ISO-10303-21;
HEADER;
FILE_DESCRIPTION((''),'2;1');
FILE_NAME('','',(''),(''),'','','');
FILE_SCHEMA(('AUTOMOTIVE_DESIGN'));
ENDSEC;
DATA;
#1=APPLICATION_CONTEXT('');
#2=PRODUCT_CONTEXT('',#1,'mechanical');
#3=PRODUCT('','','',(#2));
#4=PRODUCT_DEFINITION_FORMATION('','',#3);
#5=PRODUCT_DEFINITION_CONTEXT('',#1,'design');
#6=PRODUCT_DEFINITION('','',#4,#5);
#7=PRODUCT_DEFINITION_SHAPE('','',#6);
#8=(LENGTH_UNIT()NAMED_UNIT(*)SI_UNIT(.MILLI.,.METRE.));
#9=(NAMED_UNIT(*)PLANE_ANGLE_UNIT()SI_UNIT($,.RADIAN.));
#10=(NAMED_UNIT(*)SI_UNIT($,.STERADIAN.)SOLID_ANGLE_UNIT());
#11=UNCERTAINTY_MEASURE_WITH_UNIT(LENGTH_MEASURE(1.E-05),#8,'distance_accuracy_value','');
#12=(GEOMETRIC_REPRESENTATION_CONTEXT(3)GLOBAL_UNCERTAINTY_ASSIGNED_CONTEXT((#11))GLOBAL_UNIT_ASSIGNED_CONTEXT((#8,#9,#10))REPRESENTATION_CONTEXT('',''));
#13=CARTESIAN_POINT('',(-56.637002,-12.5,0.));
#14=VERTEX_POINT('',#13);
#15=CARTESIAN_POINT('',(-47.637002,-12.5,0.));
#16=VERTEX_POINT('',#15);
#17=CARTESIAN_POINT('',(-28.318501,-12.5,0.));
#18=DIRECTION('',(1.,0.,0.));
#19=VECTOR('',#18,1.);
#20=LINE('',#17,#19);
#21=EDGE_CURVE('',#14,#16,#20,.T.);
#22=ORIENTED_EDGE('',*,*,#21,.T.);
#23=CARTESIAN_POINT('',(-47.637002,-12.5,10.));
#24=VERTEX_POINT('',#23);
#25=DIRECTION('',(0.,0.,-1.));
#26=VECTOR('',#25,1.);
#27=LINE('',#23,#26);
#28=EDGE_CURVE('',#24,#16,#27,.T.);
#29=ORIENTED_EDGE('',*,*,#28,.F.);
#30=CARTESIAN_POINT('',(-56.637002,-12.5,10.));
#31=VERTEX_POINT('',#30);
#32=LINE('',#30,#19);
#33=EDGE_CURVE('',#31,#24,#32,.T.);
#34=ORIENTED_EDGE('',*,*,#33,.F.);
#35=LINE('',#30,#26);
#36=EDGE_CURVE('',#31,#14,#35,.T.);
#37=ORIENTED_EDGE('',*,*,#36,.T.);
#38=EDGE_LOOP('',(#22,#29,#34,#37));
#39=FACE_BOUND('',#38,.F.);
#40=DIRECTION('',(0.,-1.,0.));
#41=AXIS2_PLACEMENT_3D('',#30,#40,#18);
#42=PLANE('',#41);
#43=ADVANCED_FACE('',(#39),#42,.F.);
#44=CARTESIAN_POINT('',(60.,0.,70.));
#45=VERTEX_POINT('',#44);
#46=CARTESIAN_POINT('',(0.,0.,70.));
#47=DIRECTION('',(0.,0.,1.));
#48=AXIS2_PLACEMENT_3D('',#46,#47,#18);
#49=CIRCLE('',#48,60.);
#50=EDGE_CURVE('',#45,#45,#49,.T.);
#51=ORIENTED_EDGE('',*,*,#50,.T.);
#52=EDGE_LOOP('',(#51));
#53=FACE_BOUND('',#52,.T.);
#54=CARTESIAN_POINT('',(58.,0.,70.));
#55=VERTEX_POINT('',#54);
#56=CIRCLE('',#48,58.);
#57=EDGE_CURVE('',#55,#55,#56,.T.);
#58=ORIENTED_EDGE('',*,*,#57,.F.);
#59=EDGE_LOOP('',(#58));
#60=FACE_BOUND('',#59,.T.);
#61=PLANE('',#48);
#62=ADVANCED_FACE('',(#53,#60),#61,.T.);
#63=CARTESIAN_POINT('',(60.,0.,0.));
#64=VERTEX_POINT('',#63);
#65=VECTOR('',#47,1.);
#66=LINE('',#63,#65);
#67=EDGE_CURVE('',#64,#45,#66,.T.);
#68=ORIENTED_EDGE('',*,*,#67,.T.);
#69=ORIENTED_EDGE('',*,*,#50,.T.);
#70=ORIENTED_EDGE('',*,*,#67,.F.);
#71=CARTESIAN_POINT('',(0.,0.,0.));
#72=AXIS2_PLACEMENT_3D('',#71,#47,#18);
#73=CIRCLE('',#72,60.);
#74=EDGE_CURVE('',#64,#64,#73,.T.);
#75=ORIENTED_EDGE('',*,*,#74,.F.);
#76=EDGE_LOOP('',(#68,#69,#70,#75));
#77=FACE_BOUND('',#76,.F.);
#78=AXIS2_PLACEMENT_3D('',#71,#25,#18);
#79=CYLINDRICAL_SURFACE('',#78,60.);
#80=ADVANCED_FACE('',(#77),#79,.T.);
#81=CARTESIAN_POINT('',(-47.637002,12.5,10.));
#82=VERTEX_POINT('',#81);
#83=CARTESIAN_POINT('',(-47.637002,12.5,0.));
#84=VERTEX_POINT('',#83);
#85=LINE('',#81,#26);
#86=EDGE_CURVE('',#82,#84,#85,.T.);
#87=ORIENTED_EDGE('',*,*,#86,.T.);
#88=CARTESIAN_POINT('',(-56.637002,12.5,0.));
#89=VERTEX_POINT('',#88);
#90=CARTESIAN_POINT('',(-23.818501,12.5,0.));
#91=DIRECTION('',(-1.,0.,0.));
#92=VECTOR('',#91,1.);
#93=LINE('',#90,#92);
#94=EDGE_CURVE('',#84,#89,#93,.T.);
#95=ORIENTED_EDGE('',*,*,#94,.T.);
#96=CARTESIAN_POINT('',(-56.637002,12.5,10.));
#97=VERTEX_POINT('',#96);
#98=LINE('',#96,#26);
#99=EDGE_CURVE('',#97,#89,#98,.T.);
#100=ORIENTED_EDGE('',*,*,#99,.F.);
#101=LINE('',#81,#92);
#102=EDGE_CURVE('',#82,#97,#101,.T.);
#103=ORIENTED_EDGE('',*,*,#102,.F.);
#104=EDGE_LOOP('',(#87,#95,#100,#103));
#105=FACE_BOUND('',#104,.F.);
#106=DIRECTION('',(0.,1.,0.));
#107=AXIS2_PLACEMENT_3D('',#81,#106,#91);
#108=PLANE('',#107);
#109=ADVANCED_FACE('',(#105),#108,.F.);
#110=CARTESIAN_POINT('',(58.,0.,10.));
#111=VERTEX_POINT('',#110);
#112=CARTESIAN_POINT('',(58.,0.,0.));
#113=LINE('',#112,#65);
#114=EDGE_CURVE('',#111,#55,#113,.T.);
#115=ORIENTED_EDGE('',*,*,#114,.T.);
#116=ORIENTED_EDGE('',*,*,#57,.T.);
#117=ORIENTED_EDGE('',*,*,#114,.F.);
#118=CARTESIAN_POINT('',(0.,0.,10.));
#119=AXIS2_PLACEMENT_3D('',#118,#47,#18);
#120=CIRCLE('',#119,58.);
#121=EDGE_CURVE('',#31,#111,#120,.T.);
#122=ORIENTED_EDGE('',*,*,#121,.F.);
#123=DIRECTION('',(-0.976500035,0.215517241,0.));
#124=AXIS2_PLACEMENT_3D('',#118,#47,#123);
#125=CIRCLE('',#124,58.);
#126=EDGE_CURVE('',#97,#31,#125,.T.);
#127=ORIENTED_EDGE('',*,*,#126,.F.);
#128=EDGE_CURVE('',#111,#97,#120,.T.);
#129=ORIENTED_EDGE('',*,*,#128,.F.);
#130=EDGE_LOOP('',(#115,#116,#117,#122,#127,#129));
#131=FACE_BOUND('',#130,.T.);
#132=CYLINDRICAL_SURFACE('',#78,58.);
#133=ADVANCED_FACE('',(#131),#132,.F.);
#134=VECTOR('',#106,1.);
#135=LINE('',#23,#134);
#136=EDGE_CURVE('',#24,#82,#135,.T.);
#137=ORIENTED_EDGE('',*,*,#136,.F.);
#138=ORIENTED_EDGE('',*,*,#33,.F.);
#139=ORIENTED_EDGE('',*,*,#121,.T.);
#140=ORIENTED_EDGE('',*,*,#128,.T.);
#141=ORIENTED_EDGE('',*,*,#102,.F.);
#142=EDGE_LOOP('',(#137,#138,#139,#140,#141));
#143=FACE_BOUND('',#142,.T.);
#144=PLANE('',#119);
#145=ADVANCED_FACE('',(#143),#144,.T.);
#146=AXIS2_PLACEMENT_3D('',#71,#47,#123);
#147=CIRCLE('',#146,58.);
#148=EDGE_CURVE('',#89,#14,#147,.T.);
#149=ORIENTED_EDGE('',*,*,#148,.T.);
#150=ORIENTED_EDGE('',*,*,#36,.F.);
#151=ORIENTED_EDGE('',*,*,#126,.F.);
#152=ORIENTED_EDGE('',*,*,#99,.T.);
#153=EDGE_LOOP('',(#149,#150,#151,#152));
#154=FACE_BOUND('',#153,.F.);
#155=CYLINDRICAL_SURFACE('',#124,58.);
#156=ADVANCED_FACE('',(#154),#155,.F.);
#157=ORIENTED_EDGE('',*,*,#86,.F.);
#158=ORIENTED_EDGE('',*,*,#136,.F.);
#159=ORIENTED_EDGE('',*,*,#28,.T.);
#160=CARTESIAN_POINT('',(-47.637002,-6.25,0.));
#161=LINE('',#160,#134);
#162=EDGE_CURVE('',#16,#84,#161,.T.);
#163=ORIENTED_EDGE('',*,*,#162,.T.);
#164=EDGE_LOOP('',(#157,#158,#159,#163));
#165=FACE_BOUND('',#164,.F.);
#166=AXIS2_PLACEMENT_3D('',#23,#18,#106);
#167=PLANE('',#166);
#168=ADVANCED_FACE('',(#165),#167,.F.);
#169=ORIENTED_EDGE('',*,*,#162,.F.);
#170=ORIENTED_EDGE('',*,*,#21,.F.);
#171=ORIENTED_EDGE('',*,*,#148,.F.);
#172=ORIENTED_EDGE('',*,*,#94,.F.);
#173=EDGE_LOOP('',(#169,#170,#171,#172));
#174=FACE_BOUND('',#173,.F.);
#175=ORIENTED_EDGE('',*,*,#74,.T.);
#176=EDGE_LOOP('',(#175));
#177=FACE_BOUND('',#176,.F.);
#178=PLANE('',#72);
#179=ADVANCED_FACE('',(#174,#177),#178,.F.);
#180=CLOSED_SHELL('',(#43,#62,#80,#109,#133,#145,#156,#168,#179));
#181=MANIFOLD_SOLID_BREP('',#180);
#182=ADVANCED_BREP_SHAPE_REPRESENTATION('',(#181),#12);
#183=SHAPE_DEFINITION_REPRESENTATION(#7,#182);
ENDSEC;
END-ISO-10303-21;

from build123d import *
from build123d import SkipClean  # not in build123d's __all__

# Parameters (mm, degrees)
F0_R     = 58
F1_DEPTH = 10
F0_R_2   = 60
F2_DEPTH = 70
F4_DEPTH = 10.001


with BuildPart() as f1:
    # F0 (on Top) → F1 (new body)
    with BuildSketch(Plane.XY):
        Circle(F0_R)
    extrude(amount=F1_DEPTH)

    # F0 (on Top) → F2 (join)
    with BuildSketch(Plane.XY):
        Circle(F0_R_2)
        Circle(F0_R, mode=Mode.SUBTRACT)
    extrude(amount=F2_DEPTH)

    # F3 (on face) → F4 (cut, through all)
    with BuildSketch(Plane.XY.offset(10)):
        with BuildLine():
            Line((-47.6370020393, 12.5), (-56.6370020393, 12.5))
            ThreePointArc((-56.6370020393, 12.5), (-58, 0), (-56.6370020393, -12.5))
            Line((-56.6370020393, -12.5), (-47.6370020393, -12.5))
            Line((-47.6370020393, -12.5), (-47.6370020393, 12.5))
        make_face()
    with SkipClean():  # cleaning this boolean's faces spoils the solid; the shape is the same uncleaned
        extrude(amount=-F4_DEPTH, mode=Mode.SUBTRACT)


solid = f1.part
